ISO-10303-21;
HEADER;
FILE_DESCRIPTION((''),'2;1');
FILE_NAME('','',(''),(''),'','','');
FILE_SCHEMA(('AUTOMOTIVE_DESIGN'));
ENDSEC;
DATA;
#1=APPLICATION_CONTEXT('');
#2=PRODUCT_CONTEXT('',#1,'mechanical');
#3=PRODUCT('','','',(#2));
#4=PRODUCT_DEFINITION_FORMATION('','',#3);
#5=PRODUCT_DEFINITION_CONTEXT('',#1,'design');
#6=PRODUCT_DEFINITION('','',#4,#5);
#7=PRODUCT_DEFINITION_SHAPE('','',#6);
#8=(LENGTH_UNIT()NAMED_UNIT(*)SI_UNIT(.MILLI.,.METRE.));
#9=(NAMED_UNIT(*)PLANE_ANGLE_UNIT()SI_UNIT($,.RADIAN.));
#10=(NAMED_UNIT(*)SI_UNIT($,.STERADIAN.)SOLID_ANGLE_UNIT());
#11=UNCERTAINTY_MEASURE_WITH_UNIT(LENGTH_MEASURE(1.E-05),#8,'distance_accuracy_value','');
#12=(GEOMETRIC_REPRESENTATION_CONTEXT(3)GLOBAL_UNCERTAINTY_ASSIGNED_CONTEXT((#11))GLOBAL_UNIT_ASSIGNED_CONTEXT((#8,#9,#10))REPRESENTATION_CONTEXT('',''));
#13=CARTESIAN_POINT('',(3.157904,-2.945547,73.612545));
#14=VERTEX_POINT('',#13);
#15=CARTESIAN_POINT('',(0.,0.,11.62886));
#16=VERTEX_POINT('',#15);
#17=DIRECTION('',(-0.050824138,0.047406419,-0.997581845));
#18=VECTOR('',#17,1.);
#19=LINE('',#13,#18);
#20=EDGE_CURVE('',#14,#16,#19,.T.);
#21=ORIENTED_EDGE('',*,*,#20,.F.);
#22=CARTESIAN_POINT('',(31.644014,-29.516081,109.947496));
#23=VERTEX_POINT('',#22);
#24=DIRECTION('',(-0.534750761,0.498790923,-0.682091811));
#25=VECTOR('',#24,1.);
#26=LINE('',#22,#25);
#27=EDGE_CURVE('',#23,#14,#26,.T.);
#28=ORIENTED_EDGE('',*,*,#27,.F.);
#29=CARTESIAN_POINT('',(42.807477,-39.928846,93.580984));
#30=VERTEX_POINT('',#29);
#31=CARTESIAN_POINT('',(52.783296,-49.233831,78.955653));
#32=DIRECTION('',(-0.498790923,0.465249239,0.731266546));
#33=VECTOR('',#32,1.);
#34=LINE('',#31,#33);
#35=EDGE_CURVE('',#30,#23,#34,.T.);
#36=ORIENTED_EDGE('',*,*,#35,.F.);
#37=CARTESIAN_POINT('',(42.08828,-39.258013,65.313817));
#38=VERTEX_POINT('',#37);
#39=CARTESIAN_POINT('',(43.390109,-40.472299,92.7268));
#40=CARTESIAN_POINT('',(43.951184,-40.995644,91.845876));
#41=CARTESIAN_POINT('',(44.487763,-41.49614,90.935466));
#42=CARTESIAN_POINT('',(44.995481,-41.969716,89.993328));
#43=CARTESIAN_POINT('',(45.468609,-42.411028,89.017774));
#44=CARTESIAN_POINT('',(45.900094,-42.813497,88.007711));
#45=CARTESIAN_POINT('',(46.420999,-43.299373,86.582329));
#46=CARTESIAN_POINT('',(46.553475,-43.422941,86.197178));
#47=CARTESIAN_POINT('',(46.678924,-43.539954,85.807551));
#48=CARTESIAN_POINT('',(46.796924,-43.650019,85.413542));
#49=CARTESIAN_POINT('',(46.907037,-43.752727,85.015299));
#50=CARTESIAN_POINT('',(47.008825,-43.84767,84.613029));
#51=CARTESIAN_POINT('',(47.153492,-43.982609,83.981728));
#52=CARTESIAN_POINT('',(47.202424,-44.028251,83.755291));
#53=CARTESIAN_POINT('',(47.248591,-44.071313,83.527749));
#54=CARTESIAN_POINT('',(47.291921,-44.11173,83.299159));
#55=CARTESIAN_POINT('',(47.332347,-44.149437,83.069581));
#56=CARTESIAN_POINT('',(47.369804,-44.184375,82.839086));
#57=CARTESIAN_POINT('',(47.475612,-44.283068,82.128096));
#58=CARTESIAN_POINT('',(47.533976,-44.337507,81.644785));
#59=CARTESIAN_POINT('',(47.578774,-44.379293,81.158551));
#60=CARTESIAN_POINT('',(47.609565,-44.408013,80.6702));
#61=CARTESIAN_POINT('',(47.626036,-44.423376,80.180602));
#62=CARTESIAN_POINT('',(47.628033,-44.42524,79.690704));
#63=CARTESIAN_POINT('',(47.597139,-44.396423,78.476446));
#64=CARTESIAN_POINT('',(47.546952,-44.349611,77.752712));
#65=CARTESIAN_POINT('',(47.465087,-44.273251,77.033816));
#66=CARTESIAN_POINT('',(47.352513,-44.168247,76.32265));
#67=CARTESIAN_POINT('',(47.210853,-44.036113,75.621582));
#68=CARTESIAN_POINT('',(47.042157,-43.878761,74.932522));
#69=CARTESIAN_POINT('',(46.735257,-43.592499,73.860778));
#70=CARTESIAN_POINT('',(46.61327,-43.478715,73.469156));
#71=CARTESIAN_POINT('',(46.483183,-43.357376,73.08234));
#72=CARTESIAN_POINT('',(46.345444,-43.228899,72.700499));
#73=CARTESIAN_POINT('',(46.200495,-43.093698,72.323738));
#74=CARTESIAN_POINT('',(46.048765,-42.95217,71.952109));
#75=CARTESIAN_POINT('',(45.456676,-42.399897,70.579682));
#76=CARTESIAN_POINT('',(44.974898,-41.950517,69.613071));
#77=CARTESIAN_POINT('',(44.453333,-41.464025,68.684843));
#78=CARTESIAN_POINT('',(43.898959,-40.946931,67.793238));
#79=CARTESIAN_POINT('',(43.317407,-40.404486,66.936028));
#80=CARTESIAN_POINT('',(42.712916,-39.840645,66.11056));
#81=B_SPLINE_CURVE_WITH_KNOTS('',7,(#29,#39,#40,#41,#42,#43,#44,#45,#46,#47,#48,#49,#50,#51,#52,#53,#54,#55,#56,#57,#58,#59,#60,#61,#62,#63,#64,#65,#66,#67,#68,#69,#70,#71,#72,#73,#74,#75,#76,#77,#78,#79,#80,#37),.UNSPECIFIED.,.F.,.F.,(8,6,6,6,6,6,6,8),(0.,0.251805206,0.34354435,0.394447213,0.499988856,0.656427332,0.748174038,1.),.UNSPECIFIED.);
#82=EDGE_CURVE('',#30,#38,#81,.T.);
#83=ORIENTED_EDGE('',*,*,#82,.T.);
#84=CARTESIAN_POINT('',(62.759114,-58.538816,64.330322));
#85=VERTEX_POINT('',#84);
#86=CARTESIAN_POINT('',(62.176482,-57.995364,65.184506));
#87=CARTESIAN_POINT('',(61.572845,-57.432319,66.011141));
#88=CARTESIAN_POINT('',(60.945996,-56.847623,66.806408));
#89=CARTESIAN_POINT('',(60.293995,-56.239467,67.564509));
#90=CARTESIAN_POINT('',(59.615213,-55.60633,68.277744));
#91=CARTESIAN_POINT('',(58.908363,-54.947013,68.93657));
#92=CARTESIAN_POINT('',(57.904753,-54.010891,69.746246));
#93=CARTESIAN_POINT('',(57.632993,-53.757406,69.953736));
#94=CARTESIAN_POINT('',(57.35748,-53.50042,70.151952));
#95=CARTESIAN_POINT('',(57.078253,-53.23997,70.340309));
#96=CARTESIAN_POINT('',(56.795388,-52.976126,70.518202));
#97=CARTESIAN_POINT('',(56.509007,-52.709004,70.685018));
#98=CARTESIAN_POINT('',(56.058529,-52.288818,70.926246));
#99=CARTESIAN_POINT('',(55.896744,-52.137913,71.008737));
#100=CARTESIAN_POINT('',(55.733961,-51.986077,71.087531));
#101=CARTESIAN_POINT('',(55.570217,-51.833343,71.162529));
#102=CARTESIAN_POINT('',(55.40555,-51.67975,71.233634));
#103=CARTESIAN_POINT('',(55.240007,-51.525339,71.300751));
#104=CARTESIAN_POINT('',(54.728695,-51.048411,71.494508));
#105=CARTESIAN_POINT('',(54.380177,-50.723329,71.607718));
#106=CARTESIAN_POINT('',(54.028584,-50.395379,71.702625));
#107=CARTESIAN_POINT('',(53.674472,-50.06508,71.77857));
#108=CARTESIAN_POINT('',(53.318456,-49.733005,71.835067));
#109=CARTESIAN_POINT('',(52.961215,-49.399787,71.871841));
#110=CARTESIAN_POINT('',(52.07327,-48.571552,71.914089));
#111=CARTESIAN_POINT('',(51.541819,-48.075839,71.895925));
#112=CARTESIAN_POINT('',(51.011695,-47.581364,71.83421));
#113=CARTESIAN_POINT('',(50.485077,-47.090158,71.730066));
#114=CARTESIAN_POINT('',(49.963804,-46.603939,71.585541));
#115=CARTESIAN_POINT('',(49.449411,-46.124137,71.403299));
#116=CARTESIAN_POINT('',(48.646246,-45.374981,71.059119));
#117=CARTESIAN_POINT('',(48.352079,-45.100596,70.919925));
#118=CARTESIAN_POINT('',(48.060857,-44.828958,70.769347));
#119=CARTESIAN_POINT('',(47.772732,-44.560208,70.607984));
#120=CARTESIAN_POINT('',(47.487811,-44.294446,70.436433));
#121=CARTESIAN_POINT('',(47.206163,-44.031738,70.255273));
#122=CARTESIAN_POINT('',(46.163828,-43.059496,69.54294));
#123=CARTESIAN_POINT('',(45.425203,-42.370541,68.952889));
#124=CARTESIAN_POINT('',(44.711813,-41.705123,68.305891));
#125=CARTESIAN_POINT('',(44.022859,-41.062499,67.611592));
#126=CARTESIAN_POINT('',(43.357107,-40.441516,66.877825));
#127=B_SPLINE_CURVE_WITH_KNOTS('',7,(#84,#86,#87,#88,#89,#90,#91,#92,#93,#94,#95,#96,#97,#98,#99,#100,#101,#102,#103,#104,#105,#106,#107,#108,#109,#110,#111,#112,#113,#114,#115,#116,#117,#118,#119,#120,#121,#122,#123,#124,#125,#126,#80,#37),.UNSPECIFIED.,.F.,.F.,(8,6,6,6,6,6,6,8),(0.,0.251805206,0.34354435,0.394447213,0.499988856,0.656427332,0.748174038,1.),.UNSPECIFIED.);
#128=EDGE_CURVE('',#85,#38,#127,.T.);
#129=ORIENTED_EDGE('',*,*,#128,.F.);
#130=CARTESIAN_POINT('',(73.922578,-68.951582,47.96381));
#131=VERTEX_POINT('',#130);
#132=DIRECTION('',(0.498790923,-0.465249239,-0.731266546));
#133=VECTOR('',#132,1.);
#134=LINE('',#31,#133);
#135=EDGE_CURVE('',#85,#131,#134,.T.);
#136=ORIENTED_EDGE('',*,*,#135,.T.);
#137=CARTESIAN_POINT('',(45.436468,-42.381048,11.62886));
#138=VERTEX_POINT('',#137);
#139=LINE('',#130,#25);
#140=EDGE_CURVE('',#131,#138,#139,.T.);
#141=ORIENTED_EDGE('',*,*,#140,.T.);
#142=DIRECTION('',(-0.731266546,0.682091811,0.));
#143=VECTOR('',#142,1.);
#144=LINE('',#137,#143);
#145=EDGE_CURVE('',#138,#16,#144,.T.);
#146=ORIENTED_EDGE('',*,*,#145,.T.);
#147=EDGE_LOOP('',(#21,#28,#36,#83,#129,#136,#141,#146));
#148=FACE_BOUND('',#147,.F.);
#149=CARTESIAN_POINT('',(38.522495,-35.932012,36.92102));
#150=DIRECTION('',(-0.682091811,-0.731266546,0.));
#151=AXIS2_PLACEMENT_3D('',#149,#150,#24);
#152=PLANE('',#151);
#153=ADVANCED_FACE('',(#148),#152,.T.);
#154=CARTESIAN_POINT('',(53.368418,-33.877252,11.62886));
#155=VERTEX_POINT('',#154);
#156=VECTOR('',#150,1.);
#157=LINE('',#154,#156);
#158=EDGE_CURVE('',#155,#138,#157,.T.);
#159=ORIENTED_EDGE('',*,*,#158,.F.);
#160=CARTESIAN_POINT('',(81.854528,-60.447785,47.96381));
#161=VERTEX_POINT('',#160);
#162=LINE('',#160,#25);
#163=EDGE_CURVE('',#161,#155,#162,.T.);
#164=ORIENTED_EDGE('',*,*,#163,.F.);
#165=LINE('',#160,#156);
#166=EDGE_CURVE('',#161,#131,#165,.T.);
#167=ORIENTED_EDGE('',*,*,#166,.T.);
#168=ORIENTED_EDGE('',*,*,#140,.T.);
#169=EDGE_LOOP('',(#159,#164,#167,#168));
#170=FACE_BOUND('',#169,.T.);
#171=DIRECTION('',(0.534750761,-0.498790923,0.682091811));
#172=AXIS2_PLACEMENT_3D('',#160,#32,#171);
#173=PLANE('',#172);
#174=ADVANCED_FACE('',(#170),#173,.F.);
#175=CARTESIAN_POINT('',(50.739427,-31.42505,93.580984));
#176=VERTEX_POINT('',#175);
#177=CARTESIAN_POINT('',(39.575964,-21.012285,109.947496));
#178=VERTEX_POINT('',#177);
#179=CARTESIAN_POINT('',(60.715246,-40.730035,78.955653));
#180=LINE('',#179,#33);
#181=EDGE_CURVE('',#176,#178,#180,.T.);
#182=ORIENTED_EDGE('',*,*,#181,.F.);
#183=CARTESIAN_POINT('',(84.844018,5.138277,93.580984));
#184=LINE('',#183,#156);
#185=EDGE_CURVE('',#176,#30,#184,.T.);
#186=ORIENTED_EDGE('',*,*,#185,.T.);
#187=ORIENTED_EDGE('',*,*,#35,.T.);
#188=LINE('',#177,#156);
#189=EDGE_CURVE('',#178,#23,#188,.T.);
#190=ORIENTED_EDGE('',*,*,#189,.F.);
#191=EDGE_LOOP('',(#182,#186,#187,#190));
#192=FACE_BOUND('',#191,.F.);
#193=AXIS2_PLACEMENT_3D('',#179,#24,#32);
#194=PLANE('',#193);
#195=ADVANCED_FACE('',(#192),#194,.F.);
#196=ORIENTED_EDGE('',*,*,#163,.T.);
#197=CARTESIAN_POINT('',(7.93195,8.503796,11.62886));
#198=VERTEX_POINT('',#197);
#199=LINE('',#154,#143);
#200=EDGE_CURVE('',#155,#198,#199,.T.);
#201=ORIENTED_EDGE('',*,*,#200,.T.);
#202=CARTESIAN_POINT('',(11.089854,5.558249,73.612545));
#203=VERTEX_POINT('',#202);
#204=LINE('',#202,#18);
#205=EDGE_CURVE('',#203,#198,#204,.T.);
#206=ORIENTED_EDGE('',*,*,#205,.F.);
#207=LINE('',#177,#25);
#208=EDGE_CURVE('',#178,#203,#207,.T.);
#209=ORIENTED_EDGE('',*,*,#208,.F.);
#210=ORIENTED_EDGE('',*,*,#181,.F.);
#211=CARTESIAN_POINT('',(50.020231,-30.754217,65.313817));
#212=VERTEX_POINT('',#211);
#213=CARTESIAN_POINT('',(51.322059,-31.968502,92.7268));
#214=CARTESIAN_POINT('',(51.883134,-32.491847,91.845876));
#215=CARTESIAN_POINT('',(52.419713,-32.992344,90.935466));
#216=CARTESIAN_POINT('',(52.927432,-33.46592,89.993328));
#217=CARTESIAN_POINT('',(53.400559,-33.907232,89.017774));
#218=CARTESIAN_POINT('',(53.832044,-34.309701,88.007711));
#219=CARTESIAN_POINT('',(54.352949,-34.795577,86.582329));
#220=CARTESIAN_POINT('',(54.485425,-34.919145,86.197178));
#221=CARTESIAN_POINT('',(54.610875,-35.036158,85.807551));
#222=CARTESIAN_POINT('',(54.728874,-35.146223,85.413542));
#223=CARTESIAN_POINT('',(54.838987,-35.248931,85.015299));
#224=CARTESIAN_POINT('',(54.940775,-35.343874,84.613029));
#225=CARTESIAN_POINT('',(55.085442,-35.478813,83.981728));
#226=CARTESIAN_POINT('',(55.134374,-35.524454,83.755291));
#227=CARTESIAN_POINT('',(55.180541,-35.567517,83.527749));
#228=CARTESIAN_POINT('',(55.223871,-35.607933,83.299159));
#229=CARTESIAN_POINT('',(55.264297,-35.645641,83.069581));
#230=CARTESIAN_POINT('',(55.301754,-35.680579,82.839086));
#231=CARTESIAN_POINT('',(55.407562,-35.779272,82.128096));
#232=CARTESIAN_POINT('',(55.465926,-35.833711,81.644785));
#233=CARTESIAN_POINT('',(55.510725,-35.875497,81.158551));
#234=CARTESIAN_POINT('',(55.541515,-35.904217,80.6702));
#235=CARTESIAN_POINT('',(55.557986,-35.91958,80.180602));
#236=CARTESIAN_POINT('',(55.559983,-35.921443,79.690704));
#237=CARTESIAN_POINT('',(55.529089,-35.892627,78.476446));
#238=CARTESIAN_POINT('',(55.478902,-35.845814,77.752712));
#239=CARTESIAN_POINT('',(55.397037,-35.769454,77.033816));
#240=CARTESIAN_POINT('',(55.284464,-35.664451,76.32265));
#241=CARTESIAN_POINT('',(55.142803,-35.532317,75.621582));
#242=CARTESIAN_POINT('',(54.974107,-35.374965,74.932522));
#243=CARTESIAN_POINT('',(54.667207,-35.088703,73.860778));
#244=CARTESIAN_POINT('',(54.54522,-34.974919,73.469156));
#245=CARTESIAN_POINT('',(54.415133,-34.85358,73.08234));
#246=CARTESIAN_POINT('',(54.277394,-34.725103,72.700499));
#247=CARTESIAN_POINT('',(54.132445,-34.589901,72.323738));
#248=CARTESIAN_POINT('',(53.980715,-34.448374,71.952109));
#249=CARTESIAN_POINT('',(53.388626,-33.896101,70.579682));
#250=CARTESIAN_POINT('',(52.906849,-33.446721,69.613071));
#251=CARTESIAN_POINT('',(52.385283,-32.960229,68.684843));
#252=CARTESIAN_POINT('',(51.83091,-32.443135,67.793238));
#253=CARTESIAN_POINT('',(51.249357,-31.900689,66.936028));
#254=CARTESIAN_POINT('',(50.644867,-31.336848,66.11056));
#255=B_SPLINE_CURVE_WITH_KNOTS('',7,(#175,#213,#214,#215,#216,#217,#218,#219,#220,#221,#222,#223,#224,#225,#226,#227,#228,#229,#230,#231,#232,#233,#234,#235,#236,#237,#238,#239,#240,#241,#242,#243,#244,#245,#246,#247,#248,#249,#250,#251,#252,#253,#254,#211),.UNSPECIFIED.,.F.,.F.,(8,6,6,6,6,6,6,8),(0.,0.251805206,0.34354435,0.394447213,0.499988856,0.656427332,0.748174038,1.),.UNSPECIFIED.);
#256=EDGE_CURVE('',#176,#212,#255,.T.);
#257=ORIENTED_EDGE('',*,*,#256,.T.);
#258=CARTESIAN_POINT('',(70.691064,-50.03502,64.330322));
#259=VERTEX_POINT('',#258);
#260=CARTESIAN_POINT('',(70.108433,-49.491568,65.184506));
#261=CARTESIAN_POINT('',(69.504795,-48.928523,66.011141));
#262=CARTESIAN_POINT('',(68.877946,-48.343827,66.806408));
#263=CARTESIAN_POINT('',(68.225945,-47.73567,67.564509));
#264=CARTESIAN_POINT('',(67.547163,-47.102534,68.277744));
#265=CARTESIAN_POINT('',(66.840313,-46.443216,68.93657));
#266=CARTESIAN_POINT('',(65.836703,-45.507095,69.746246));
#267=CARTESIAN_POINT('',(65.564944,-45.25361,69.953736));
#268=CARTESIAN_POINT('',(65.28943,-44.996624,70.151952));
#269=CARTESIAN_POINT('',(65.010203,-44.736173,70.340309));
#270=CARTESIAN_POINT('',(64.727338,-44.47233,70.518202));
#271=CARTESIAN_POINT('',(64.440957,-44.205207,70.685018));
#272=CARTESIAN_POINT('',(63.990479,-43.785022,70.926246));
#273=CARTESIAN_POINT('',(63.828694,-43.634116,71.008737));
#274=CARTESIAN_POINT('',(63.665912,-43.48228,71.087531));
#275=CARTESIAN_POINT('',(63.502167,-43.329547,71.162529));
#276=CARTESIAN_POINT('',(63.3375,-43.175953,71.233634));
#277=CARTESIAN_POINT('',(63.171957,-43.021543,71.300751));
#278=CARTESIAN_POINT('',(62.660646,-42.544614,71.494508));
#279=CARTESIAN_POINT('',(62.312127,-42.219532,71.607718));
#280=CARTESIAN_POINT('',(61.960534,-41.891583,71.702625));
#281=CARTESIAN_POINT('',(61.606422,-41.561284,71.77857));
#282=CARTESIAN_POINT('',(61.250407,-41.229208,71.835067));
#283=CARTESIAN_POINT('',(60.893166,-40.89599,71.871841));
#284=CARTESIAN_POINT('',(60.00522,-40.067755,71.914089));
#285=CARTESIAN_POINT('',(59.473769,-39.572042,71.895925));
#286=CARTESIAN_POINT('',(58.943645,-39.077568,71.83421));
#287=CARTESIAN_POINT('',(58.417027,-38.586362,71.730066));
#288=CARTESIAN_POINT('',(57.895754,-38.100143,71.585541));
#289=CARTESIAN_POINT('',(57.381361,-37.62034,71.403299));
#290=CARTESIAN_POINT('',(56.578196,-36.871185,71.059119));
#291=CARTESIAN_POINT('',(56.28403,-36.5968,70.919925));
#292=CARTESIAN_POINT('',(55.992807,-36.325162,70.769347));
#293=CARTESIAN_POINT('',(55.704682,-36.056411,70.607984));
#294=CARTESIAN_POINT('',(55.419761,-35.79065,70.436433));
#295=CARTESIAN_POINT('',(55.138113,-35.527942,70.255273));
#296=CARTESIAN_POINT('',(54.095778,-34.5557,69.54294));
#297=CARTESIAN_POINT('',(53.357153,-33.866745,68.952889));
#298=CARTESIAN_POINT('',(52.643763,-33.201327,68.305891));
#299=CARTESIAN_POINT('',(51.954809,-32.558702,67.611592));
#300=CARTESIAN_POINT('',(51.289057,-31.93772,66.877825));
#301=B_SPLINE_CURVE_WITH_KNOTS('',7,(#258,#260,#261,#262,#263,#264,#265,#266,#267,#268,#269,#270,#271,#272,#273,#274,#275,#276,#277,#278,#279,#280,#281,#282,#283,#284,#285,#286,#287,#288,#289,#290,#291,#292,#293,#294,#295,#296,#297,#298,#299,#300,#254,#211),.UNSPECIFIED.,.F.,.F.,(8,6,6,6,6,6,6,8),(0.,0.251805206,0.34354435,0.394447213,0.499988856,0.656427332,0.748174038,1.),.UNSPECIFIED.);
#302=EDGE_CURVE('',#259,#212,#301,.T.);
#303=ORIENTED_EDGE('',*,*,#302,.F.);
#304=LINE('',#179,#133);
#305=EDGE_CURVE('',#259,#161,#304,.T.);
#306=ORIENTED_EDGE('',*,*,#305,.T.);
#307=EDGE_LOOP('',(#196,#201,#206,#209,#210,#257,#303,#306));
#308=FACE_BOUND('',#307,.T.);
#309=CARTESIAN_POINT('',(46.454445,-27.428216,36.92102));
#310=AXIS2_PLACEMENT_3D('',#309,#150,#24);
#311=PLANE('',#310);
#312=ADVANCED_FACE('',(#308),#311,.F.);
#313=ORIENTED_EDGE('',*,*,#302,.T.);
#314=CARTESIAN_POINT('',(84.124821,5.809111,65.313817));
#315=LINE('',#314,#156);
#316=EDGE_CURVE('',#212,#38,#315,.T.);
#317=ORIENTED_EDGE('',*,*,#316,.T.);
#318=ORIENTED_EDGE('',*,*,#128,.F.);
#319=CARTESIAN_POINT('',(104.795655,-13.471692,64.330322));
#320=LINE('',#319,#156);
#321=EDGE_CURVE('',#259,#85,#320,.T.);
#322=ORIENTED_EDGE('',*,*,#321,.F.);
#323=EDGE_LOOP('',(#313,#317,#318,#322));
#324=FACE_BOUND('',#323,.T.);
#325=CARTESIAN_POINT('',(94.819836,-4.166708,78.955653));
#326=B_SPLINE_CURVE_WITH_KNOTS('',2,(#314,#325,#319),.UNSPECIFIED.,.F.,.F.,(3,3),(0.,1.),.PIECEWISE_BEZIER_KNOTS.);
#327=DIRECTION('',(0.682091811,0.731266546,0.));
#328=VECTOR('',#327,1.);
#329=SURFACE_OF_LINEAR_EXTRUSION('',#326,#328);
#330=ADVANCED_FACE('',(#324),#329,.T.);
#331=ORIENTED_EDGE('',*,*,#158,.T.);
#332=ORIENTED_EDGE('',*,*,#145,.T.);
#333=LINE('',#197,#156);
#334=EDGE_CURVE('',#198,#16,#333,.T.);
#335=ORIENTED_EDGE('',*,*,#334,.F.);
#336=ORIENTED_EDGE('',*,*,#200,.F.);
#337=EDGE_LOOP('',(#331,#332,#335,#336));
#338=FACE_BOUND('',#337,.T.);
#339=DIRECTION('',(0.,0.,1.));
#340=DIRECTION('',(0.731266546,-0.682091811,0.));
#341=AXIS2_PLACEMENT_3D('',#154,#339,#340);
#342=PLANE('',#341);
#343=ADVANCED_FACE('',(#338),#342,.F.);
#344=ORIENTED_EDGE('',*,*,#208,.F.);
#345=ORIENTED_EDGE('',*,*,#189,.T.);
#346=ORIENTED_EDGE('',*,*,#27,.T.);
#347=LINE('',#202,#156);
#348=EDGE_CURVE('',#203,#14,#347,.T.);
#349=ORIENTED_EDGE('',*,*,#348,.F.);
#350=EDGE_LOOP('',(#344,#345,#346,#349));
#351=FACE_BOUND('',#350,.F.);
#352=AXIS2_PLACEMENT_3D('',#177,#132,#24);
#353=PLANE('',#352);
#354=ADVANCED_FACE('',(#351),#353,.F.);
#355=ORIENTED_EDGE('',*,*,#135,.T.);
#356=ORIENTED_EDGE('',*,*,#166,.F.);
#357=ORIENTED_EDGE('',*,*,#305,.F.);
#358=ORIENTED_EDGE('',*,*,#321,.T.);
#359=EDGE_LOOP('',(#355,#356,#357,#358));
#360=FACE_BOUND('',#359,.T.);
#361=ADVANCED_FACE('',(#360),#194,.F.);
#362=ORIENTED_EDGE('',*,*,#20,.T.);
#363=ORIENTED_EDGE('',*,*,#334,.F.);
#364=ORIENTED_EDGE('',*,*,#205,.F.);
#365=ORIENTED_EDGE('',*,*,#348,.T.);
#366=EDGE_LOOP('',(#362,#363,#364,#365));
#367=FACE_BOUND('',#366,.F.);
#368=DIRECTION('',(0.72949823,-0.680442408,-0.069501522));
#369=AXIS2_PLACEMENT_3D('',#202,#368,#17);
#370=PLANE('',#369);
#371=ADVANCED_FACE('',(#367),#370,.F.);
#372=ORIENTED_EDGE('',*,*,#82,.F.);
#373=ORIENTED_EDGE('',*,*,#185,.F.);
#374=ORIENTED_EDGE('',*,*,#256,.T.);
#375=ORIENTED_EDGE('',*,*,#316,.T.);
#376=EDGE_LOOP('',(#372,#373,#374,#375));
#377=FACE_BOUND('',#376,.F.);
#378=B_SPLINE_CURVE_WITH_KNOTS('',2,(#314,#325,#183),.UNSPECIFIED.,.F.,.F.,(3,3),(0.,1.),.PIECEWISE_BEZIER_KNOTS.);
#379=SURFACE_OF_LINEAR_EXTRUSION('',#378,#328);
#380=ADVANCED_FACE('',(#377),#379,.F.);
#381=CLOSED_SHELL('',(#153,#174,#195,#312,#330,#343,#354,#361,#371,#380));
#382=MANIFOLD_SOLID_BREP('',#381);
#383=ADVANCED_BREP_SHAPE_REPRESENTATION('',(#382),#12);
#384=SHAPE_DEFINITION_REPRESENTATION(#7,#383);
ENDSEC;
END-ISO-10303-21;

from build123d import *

# Parameters (mm, degrees)
F1_DEPTH    = 11.62886
F2_T1_DEPTH = 111.62886
F4_ANGLE    = -90


# Not quite as in the source:
# - a fillet or chamfer that OpenCascade refuses, or shapes differently, is made with other operations: its cross-section is extruded or revolved along the edge and cut away or added


with BuildPart() as f1:
    # F0 (on Top) → F1 (new body)
    with BuildSketch(Plane.XY):
        Polygon((45.4364679754, 42.3810482025), (0, 0), (98.7063497305, 0), (98.7063497305, 42.3810482025), align=None)
    extrude(amount=F1_DEPTH)

    # F2: fillet of radius 20 on 1 edges, made by hand

    # F2_s2 → F2_t1 (cut)
    with BuildSketch(Plane.XY.offset(-50)):
        with BuildLine():
            add(Edge.make_bspline(
                [(78.7063497305, 0), (98.7063497305, 0), (98.7063497305, 20)],
                knots=[0, 0, 0, 1, 1, 1], degree=2, weights=[1, 1, 1]))
            Line((98.7063497305, 20), (98.7063497305, 0))
            Line((98.7063497305, 0), (78.7063497305, 0))
        make_face()
    extrude(amount=F2_T1_DEPTH, mode=Mode.SUBTRACT)

    # F3: F1 across plane


with BuildPart() as f1_1:
    add(f1.part)
    add(f1.part.mirror(Plane.XZ))


with BuildPart() as f1_2:
    # F4: moved
    add(f1_1.part.rotate(Axis((22.7182339877, -21.1905241013, 11.62886), (-0.7312665459, 0.6820918111, 0)), F4_ANGLE))


solid = f1_2.part
